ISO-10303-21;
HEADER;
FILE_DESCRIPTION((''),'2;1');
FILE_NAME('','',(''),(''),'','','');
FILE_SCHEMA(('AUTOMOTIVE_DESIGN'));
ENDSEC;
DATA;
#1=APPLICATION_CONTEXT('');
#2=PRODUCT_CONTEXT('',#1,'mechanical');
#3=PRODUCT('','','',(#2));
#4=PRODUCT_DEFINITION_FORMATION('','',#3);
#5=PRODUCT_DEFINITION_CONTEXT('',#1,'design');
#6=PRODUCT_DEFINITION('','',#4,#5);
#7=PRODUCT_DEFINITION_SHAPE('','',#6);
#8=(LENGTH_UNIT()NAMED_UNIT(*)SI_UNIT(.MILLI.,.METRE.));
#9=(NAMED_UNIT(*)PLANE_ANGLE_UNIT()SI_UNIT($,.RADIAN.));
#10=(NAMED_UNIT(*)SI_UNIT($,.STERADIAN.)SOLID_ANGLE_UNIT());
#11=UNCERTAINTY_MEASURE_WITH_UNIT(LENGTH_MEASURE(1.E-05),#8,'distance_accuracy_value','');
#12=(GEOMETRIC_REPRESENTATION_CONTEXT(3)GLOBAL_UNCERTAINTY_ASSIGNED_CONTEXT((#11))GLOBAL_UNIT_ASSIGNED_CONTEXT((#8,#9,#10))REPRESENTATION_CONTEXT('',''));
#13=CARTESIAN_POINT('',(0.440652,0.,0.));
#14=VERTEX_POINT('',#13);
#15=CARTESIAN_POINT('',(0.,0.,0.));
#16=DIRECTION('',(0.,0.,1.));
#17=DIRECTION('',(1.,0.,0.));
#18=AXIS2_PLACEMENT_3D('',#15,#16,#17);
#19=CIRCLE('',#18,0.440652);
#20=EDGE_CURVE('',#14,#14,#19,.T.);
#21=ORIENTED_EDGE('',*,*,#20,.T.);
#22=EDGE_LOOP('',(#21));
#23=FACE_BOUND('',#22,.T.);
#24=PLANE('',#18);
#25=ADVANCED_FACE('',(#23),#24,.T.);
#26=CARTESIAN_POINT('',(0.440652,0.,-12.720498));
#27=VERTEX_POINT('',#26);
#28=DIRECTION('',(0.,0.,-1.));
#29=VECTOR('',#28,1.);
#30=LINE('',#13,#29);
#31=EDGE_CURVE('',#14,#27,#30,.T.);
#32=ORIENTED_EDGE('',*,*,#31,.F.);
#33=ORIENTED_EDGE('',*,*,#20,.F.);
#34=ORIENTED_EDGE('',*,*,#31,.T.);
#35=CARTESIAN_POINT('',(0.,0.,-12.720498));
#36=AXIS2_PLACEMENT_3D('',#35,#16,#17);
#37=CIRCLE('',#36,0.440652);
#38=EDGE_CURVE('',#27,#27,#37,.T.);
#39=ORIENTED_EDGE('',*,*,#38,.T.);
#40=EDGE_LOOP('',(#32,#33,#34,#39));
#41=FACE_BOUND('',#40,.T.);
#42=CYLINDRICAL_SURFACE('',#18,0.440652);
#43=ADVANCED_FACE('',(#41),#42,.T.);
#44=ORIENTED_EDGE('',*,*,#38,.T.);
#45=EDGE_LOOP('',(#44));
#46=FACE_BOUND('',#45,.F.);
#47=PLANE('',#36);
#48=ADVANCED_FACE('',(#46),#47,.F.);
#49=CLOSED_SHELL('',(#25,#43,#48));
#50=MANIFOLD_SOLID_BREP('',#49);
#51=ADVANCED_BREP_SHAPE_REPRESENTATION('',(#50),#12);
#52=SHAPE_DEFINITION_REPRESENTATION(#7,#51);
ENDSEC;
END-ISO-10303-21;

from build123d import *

# Parameters (mm, degrees)
F4_R     = 0.4406519
F5_DEPTH = 12.7204982564


# Not quite as in the source:
# - the program builds the solid bodies; features that only make, move or delete a surface that nothing else refers to are left out


with BuildPart() as f5:
    # F4 (on Top) → F5 (new body, through all)
    with BuildSketch(Plane.XY):
        Circle(F4_R)
    extrude(amount=-F5_DEPTH)


solid = f5.part
